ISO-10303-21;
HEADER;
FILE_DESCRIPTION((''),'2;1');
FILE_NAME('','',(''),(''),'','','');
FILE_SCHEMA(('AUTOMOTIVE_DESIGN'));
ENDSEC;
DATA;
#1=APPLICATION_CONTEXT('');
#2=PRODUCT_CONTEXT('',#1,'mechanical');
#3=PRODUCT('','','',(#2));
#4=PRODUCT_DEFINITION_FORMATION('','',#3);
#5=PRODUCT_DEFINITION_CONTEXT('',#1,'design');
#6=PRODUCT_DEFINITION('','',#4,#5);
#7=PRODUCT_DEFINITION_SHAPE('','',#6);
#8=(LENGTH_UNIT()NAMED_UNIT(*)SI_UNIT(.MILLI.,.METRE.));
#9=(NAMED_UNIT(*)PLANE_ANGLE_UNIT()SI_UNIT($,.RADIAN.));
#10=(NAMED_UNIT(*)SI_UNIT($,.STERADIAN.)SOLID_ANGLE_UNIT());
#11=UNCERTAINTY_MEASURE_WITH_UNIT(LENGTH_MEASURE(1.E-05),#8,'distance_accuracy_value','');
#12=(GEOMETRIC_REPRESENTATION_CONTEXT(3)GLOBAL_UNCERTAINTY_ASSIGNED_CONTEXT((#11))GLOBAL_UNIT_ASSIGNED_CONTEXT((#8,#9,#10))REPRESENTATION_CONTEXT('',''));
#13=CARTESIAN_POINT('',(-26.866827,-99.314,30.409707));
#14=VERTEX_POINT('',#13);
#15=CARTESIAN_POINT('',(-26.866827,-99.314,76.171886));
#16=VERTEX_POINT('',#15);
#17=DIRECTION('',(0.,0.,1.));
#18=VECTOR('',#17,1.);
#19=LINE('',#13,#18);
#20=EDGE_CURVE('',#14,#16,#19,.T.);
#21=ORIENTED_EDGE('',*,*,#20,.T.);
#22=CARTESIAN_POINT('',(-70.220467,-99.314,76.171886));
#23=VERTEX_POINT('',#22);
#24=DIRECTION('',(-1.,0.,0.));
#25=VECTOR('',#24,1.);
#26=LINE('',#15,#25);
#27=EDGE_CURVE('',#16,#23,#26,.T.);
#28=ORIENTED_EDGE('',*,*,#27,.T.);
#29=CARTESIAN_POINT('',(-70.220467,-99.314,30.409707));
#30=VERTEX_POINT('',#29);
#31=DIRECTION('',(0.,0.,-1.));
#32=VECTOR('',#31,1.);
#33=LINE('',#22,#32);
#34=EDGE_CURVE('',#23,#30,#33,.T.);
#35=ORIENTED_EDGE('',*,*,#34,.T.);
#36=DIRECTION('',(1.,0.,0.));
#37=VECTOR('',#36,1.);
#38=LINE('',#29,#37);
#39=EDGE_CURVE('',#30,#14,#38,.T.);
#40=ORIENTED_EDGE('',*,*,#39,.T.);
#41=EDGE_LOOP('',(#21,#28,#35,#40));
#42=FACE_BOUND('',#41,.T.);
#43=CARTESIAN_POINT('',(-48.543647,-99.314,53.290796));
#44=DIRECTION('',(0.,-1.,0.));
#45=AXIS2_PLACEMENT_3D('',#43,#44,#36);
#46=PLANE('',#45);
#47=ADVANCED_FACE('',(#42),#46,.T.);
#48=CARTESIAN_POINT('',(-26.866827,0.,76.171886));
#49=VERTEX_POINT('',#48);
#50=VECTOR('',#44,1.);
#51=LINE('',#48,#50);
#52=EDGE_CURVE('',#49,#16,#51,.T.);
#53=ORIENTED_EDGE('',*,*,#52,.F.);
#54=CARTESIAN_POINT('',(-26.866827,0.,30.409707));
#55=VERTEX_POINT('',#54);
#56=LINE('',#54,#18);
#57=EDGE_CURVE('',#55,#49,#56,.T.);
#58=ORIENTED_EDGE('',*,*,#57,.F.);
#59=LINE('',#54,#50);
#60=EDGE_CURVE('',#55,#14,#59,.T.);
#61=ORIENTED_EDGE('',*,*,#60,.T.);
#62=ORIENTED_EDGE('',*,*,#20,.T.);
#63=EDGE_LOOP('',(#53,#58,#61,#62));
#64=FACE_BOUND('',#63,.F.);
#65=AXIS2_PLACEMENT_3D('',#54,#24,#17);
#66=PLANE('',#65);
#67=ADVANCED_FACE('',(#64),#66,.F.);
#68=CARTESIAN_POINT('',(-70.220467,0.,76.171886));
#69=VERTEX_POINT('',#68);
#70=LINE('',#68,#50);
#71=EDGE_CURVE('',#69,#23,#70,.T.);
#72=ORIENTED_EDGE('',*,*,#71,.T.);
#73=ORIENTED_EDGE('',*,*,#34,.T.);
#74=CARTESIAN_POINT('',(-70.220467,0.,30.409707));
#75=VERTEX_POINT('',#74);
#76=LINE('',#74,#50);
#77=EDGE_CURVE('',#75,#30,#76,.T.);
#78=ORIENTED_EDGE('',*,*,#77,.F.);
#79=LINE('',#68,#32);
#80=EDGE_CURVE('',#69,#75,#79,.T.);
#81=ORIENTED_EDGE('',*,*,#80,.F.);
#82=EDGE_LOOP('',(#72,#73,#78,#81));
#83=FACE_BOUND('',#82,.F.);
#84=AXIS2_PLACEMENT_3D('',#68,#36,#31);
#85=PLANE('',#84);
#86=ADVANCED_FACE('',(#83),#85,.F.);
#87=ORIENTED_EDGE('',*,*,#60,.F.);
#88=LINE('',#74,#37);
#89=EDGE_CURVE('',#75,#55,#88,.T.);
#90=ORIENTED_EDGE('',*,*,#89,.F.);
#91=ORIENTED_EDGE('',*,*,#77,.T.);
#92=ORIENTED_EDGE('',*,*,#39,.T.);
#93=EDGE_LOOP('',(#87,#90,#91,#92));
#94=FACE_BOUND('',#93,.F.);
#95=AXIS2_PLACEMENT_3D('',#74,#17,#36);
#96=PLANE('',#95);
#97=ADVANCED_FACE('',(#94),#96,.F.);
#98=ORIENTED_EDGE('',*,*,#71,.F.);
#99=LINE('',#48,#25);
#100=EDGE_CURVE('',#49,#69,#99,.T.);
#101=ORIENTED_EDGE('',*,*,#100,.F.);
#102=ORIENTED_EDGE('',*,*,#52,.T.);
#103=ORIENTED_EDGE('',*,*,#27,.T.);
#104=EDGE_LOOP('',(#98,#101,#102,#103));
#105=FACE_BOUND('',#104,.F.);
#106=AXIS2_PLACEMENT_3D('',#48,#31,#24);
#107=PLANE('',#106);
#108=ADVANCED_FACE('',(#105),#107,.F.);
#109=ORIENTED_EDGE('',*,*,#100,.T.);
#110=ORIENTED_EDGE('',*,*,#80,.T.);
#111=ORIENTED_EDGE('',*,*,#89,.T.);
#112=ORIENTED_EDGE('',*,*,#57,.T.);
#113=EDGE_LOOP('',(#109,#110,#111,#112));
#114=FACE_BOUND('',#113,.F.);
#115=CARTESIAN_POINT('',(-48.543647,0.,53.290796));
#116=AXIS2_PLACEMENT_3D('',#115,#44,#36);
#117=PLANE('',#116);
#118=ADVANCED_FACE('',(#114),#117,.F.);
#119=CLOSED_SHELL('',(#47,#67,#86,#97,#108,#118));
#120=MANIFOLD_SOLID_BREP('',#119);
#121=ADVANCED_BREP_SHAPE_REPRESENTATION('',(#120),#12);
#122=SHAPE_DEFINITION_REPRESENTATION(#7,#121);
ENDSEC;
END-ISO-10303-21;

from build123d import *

# Parameters (mm, degrees)
F1_DEPTH = 99.314


# Not quite as in the source:
# - the program builds the solid bodies; features that only make, move or delete a surface that nothing else refers to are left out


with BuildPart() as f1:
    # F0 (on Front) → F1 (new body)
    with BuildSketch(Plane.XZ):
        Polygon((-70.2204668219, 30.4097067565), (-26.8668271601, 30.4097067565), (-26.8668271601, 76.1718861759), (-40.1111178976, 76.1718861759), (-70.2204668219, 76.1718861759), align=None)
    extrude(amount=F1_DEPTH)


solid = f1.part
